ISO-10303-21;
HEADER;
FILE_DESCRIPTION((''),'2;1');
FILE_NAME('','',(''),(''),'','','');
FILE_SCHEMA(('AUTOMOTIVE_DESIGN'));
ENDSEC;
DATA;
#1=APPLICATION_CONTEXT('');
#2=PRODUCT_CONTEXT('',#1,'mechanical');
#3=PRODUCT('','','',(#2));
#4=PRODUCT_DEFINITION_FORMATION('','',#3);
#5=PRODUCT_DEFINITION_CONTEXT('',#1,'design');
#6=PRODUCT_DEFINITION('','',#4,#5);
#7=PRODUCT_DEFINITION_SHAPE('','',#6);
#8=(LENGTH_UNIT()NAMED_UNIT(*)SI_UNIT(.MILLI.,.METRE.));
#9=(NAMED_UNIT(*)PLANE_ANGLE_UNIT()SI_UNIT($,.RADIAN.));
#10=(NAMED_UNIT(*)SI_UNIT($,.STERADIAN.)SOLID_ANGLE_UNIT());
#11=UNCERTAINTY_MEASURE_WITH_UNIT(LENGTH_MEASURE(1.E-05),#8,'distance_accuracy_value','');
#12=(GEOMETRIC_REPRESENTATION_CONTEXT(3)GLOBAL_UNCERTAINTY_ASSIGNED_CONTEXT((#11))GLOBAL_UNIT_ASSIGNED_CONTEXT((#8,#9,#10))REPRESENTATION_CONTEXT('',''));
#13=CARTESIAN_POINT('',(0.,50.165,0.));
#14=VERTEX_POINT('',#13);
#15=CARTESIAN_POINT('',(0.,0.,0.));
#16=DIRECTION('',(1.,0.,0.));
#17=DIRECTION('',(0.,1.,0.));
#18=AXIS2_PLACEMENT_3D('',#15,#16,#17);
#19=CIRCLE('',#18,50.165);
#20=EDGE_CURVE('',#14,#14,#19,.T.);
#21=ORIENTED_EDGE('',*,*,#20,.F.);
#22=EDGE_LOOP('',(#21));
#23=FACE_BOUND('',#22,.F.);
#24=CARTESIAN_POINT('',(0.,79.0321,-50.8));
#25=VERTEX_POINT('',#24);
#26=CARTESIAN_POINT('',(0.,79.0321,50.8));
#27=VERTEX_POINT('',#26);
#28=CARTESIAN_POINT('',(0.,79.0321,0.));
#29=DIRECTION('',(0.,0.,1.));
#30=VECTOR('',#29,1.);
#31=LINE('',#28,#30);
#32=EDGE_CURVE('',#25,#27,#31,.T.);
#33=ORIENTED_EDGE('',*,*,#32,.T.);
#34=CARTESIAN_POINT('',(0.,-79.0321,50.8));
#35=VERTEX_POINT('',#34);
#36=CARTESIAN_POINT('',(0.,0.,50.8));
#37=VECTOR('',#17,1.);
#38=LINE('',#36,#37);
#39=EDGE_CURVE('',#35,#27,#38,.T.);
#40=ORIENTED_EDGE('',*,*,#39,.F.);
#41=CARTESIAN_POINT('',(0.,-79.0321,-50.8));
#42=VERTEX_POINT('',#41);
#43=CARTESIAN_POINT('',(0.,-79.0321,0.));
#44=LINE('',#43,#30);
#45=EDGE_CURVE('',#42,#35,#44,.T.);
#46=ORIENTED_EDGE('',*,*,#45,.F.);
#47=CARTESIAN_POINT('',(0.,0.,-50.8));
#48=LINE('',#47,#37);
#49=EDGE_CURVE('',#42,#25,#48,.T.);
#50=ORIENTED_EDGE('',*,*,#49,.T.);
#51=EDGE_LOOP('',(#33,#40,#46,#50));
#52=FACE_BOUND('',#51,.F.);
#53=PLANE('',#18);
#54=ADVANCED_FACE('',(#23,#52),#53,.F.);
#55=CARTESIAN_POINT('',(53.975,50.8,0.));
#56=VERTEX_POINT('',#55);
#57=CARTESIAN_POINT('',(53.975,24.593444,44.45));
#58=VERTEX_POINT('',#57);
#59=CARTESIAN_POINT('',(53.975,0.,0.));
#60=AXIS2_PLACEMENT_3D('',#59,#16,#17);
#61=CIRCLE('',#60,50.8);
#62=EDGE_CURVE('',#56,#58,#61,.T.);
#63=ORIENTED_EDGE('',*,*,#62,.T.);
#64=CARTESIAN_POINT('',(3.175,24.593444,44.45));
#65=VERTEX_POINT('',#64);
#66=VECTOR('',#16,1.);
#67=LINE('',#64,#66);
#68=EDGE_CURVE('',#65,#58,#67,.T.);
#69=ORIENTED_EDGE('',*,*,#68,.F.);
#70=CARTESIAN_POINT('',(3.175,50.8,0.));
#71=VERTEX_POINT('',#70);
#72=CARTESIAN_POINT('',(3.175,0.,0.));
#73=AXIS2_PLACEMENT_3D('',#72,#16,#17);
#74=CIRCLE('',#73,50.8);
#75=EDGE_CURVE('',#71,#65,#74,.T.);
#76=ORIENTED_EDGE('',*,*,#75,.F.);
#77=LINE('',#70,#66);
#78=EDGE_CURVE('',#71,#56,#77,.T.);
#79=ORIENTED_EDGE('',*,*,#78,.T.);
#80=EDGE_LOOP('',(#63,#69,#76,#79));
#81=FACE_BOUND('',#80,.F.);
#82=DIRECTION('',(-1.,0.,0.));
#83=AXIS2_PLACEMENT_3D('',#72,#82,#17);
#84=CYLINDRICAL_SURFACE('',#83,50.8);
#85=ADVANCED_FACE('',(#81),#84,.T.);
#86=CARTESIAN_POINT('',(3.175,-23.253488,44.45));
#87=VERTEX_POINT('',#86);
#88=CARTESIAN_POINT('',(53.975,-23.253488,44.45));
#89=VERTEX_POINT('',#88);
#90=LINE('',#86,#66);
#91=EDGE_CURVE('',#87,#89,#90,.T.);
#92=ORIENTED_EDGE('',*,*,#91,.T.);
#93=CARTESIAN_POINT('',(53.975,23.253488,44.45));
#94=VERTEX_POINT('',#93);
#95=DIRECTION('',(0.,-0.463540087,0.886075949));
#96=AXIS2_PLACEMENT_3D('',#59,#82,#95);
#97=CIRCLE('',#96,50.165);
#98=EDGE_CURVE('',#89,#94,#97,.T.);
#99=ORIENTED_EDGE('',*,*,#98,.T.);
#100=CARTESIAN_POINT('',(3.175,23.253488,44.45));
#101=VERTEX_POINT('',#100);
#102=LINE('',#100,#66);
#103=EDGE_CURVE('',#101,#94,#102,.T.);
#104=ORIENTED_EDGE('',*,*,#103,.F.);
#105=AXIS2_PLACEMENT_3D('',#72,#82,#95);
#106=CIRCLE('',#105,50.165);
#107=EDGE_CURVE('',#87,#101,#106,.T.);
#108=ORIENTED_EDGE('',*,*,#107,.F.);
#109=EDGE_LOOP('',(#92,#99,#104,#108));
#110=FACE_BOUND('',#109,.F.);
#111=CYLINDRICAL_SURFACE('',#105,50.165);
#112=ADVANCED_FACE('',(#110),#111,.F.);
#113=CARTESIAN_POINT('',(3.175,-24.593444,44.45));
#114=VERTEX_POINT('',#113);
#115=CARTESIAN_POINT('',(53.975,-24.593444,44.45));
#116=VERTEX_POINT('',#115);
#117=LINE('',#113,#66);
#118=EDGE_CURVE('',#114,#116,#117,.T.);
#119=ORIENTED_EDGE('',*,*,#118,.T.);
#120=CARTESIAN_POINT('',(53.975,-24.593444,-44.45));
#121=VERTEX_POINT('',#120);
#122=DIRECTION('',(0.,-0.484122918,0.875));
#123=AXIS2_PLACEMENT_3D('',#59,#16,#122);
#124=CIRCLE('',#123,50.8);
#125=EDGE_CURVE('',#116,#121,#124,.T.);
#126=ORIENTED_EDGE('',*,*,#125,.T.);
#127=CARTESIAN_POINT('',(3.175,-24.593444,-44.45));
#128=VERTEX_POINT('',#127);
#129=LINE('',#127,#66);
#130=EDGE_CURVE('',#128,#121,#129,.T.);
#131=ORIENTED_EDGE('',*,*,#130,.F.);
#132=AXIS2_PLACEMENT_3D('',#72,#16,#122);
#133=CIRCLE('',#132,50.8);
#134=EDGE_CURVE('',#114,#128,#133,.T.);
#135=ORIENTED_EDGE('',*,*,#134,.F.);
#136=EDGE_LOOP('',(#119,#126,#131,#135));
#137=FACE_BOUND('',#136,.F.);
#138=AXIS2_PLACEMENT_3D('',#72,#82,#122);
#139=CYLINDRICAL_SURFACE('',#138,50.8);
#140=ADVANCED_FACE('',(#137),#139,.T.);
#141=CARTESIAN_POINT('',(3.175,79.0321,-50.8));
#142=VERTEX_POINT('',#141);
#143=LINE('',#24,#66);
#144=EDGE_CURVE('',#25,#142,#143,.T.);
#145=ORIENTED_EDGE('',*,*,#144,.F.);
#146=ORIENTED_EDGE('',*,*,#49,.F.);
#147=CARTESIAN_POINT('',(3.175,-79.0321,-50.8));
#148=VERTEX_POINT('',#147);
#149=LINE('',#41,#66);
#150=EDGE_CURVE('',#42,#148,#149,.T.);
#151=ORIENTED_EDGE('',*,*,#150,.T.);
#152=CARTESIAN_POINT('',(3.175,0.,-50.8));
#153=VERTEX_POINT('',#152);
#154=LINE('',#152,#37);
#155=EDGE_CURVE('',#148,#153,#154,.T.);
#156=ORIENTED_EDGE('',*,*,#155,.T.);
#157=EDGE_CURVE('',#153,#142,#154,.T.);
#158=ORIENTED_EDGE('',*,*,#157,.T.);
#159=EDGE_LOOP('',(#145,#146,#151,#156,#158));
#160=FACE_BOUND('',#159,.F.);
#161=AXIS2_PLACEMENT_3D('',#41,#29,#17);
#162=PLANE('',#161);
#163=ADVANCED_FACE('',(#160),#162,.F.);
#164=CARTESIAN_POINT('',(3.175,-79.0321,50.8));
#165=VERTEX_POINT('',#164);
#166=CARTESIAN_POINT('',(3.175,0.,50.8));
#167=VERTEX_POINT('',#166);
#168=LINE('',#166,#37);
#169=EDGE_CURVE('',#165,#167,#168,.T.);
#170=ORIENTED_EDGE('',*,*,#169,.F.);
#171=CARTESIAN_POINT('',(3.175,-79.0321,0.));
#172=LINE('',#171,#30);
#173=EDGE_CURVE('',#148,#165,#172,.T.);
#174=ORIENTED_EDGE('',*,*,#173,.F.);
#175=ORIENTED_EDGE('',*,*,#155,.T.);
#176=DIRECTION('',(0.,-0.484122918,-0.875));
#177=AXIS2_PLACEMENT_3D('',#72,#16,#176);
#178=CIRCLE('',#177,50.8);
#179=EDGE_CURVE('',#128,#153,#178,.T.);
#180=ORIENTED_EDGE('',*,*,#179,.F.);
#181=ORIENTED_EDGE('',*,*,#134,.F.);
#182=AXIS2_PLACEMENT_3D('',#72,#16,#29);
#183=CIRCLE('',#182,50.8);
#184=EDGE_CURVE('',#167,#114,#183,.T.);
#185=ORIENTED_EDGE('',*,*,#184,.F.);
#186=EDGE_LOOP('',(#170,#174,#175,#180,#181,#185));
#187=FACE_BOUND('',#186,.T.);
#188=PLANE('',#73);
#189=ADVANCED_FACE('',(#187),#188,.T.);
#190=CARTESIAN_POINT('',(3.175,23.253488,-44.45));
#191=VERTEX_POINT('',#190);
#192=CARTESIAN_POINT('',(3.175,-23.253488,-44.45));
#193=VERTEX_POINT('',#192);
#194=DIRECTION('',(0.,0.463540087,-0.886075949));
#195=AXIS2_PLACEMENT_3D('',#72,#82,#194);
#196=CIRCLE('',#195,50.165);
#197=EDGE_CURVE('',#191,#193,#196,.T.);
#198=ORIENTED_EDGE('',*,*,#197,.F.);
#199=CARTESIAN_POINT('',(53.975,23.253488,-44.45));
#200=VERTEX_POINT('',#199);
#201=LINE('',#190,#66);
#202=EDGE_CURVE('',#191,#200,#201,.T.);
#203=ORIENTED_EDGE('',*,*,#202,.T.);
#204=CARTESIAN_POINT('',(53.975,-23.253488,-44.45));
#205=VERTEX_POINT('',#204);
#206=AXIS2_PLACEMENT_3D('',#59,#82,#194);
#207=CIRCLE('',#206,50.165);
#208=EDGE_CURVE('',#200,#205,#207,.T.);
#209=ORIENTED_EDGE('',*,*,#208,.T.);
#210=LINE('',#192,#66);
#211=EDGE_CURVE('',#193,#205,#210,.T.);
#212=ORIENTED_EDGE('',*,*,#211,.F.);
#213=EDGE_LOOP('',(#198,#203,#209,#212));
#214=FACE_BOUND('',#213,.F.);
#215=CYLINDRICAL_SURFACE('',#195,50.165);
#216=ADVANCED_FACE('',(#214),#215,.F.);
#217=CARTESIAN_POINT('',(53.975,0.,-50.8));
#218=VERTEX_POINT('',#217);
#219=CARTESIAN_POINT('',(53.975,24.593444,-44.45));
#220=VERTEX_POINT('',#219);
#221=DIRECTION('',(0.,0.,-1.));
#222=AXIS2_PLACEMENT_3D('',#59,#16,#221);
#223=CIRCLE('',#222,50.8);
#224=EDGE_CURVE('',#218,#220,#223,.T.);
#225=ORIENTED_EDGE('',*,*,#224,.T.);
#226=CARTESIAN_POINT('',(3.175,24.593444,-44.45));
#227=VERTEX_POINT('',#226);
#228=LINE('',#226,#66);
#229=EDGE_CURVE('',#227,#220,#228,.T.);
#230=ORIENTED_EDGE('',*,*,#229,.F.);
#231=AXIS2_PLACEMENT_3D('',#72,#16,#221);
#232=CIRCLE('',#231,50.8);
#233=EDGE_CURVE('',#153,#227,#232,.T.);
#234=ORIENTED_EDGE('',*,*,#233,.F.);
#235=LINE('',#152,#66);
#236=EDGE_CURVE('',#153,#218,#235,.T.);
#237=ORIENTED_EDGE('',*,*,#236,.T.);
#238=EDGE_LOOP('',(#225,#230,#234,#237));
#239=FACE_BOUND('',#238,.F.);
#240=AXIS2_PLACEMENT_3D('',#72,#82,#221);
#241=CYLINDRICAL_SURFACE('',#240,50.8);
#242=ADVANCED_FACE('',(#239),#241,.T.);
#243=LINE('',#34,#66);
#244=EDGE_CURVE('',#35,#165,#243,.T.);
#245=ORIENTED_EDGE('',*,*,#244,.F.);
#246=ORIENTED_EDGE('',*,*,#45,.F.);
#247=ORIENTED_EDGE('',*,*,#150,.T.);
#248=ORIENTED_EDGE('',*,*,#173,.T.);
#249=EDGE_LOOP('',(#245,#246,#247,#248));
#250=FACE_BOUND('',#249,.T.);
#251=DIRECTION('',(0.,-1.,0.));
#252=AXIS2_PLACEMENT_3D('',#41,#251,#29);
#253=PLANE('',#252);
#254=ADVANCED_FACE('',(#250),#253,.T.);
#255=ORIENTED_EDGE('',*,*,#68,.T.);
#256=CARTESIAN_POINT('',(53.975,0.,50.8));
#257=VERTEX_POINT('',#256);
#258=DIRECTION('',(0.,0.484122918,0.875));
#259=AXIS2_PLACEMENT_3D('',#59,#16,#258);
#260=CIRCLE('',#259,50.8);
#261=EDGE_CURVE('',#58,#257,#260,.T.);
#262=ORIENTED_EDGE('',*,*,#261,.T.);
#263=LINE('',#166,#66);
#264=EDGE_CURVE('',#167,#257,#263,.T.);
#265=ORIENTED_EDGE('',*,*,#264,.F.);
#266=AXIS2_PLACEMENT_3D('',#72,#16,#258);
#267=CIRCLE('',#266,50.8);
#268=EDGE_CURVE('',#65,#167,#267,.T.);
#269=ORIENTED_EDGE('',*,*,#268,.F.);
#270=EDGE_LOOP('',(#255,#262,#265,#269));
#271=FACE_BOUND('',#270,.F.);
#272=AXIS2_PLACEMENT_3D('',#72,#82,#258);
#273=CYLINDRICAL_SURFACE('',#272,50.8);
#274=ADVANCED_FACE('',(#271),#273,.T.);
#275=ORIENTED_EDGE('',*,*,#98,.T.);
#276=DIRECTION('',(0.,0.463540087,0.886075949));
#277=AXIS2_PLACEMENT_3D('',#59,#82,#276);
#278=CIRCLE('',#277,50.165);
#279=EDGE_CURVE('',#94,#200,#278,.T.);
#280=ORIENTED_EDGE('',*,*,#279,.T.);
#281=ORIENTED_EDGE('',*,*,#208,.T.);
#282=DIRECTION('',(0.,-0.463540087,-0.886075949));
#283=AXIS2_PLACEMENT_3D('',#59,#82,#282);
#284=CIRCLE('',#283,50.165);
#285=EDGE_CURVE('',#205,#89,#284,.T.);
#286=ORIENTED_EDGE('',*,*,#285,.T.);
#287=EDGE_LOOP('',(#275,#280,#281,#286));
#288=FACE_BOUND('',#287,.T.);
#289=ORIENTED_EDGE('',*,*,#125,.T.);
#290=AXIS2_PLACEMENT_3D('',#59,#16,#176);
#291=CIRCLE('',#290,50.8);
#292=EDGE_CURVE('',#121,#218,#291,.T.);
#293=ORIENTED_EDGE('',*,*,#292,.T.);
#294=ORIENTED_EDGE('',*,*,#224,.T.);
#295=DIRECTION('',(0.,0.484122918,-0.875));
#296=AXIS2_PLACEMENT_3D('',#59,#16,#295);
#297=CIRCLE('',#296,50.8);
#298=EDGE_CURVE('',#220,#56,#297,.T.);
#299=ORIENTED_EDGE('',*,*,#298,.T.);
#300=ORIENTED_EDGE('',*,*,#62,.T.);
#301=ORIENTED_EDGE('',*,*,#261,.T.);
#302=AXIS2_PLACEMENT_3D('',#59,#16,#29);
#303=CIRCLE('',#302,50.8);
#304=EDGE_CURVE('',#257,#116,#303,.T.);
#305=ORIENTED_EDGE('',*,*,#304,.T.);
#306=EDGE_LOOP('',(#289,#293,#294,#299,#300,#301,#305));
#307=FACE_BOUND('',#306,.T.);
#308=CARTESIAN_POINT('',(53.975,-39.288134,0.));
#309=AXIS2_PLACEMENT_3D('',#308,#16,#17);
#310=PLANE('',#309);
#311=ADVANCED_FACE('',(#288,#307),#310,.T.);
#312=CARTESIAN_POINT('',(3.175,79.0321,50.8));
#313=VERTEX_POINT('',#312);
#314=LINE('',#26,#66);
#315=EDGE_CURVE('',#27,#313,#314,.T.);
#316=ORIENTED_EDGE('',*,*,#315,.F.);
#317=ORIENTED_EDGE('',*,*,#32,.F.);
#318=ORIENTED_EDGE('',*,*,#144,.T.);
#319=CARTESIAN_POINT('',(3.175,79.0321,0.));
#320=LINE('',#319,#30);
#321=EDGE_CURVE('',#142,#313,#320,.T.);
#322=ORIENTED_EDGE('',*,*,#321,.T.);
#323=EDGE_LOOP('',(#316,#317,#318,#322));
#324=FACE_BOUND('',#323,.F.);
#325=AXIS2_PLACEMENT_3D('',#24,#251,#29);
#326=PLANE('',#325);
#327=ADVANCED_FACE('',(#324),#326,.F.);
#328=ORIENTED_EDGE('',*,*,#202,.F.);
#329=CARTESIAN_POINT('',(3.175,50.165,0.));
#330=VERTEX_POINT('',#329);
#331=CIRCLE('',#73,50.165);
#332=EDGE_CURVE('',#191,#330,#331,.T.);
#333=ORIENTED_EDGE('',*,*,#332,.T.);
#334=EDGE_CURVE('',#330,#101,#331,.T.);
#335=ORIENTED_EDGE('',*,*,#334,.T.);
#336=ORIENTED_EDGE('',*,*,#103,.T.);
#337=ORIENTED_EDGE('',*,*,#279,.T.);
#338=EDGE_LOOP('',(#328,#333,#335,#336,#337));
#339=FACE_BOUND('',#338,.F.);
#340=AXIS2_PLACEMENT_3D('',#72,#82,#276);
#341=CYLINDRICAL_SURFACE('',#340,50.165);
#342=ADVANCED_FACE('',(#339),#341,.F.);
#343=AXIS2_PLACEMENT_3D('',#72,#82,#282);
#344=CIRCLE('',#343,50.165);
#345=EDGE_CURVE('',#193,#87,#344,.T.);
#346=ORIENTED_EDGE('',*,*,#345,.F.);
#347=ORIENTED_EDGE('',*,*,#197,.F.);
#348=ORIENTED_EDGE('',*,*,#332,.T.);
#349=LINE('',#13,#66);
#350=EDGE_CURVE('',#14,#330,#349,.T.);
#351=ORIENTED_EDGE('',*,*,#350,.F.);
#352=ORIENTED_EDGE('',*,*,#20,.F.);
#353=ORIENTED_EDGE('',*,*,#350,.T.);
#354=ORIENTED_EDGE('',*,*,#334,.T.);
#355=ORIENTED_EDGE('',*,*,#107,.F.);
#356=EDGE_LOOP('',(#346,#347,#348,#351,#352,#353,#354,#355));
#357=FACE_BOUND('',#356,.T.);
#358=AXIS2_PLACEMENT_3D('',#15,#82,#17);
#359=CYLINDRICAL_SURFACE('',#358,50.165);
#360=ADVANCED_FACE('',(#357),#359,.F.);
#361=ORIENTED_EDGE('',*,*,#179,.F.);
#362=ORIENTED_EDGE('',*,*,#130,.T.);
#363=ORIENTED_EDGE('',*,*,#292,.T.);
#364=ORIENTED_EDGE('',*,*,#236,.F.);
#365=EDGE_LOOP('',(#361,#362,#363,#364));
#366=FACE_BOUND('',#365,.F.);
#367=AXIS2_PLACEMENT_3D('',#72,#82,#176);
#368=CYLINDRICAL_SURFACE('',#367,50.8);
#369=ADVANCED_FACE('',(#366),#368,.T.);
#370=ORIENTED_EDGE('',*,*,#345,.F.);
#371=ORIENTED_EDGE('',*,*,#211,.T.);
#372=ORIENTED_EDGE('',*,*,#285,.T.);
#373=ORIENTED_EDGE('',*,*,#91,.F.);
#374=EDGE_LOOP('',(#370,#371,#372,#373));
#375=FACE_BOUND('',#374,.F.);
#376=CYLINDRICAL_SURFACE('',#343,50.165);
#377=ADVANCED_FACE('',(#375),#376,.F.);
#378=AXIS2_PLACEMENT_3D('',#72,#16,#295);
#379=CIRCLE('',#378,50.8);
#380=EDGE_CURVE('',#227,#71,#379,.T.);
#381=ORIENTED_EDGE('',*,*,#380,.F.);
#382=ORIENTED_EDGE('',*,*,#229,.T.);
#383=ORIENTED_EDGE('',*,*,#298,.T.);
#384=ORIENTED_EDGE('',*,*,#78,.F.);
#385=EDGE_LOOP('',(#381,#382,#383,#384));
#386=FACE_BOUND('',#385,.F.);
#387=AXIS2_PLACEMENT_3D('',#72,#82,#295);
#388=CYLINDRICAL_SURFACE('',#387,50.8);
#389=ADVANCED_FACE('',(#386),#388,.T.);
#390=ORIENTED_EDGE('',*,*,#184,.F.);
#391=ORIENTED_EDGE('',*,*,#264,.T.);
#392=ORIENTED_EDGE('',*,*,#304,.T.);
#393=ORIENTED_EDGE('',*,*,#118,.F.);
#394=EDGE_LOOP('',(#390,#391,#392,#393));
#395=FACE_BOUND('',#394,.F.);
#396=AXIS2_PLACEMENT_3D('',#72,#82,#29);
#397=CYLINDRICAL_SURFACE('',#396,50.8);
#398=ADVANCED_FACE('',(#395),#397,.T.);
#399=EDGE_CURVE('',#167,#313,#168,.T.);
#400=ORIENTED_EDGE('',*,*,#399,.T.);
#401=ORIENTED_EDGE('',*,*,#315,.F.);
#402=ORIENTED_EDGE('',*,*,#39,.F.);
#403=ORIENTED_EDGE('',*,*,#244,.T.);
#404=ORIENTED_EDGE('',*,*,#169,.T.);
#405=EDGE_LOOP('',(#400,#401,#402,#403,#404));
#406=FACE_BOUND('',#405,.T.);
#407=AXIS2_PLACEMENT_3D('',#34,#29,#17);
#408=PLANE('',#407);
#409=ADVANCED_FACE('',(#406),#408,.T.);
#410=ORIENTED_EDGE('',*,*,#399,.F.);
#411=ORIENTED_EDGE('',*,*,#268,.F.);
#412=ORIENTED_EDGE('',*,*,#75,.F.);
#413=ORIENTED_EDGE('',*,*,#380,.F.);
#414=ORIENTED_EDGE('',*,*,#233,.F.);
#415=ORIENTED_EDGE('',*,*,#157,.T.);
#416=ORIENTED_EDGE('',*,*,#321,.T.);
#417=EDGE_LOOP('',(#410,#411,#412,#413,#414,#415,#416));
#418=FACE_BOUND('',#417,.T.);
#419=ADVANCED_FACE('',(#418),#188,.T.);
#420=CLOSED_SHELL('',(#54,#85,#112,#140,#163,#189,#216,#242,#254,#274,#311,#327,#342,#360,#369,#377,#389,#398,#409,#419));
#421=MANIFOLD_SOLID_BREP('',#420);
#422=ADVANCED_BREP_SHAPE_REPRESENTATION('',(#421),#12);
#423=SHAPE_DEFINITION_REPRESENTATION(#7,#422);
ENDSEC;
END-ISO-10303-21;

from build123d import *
from build123d import SkipClean  # not in build123d's __all__

# Parameters (mm, degrees)
F0_W     = 158.0642
F0_H     = 101.6
F0_R     = 50.165
F1_DEPTH = 3.175
F3_DEPTH = 50.8


with BuildPart() as f1:
    # F0 (on Right) → F1 (new body)
    with BuildSketch(Plane.YZ):
        Rectangle(F0_W, F0_H)
        Circle(F0_R, mode=Mode.SUBTRACT)
    extrude(amount=F1_DEPTH)

    # F2 (on face) → F3 (join)
    with BuildSketch(Plane.YZ.offset(3.175)):
        with BuildLine():
            Line((-23.253488448, 44.45), (-24.5934442484, 44.45))
            ThreePointArc((-24.5934442484, 44.45), (-50.8, 0), (-24.5934442484, -44.45))
            Line((-24.5934442484, -44.45), (-23.253488448, -44.45))
            ThreePointArc((-23.253488448, -44.45), (-50.165, 0), (-23.253488448, 44.45))
        make_face()
        with BuildLine():
            ThreePointArc((24.5934442484, -44.45), (43.7606385226, -25.8001262805), (50.8, 0))
            ThreePointArc((50.8, 0), (43.7606385226, 25.8001262805), (24.5934442484, 44.45))
            Line((24.5934442484, 44.45), (23.253488448, 44.45))
            ThreePointArc((23.253488448, 44.45), (42.9129262169, 25.9809158519), (50.165, 0))
            ThreePointArc((50.165, 0), (42.9129262169, -25.9809158519), (23.253488448, -44.45))
            Line((23.253488448, -44.45), (24.5934442484, -44.45))
        make_face()
        with BuildLine():
            Line((23.253488448, 44.45), (24.5934442484, 44.45))
            ThreePointArc((24.5934442484, 44.45), (12.6999999984, 49.1868884972), (-3.3e-09, 50.8))
            ThreePointArc((-3.3e-09, 50.8), (-12.7000000016, 49.1868884964), (-24.5934442484, 44.45))
            Line((-24.5934442484, 44.45), (-23.253488448, 44.45))
            ThreePointArc((-23.253488448, 44.45), (0, 50.165), (23.253488448, 44.45))
        make_face()
        with BuildLine():
            ThreePointArc((0, -50.8), (12.7, -49.1868884968), (24.5934442484, -44.45))
            Line((24.5934442484, -44.45), (23.253488448, -44.45))
            ThreePointArc((23.253488448, -44.45), (0, -50.165), (-23.253488448, -44.45))
            Line((-23.253488448, -44.45), (-24.5934442484, -44.45))
            ThreePointArc((-24.5934442484, -44.45), (-12.7, -49.1868884968), (0, -50.8))
        make_face()
    with SkipClean():  # cleaning this boolean's faces spoils the solid; the shape is the same uncleaned
        extrude(amount=F3_DEPTH)


solid = f1.part
